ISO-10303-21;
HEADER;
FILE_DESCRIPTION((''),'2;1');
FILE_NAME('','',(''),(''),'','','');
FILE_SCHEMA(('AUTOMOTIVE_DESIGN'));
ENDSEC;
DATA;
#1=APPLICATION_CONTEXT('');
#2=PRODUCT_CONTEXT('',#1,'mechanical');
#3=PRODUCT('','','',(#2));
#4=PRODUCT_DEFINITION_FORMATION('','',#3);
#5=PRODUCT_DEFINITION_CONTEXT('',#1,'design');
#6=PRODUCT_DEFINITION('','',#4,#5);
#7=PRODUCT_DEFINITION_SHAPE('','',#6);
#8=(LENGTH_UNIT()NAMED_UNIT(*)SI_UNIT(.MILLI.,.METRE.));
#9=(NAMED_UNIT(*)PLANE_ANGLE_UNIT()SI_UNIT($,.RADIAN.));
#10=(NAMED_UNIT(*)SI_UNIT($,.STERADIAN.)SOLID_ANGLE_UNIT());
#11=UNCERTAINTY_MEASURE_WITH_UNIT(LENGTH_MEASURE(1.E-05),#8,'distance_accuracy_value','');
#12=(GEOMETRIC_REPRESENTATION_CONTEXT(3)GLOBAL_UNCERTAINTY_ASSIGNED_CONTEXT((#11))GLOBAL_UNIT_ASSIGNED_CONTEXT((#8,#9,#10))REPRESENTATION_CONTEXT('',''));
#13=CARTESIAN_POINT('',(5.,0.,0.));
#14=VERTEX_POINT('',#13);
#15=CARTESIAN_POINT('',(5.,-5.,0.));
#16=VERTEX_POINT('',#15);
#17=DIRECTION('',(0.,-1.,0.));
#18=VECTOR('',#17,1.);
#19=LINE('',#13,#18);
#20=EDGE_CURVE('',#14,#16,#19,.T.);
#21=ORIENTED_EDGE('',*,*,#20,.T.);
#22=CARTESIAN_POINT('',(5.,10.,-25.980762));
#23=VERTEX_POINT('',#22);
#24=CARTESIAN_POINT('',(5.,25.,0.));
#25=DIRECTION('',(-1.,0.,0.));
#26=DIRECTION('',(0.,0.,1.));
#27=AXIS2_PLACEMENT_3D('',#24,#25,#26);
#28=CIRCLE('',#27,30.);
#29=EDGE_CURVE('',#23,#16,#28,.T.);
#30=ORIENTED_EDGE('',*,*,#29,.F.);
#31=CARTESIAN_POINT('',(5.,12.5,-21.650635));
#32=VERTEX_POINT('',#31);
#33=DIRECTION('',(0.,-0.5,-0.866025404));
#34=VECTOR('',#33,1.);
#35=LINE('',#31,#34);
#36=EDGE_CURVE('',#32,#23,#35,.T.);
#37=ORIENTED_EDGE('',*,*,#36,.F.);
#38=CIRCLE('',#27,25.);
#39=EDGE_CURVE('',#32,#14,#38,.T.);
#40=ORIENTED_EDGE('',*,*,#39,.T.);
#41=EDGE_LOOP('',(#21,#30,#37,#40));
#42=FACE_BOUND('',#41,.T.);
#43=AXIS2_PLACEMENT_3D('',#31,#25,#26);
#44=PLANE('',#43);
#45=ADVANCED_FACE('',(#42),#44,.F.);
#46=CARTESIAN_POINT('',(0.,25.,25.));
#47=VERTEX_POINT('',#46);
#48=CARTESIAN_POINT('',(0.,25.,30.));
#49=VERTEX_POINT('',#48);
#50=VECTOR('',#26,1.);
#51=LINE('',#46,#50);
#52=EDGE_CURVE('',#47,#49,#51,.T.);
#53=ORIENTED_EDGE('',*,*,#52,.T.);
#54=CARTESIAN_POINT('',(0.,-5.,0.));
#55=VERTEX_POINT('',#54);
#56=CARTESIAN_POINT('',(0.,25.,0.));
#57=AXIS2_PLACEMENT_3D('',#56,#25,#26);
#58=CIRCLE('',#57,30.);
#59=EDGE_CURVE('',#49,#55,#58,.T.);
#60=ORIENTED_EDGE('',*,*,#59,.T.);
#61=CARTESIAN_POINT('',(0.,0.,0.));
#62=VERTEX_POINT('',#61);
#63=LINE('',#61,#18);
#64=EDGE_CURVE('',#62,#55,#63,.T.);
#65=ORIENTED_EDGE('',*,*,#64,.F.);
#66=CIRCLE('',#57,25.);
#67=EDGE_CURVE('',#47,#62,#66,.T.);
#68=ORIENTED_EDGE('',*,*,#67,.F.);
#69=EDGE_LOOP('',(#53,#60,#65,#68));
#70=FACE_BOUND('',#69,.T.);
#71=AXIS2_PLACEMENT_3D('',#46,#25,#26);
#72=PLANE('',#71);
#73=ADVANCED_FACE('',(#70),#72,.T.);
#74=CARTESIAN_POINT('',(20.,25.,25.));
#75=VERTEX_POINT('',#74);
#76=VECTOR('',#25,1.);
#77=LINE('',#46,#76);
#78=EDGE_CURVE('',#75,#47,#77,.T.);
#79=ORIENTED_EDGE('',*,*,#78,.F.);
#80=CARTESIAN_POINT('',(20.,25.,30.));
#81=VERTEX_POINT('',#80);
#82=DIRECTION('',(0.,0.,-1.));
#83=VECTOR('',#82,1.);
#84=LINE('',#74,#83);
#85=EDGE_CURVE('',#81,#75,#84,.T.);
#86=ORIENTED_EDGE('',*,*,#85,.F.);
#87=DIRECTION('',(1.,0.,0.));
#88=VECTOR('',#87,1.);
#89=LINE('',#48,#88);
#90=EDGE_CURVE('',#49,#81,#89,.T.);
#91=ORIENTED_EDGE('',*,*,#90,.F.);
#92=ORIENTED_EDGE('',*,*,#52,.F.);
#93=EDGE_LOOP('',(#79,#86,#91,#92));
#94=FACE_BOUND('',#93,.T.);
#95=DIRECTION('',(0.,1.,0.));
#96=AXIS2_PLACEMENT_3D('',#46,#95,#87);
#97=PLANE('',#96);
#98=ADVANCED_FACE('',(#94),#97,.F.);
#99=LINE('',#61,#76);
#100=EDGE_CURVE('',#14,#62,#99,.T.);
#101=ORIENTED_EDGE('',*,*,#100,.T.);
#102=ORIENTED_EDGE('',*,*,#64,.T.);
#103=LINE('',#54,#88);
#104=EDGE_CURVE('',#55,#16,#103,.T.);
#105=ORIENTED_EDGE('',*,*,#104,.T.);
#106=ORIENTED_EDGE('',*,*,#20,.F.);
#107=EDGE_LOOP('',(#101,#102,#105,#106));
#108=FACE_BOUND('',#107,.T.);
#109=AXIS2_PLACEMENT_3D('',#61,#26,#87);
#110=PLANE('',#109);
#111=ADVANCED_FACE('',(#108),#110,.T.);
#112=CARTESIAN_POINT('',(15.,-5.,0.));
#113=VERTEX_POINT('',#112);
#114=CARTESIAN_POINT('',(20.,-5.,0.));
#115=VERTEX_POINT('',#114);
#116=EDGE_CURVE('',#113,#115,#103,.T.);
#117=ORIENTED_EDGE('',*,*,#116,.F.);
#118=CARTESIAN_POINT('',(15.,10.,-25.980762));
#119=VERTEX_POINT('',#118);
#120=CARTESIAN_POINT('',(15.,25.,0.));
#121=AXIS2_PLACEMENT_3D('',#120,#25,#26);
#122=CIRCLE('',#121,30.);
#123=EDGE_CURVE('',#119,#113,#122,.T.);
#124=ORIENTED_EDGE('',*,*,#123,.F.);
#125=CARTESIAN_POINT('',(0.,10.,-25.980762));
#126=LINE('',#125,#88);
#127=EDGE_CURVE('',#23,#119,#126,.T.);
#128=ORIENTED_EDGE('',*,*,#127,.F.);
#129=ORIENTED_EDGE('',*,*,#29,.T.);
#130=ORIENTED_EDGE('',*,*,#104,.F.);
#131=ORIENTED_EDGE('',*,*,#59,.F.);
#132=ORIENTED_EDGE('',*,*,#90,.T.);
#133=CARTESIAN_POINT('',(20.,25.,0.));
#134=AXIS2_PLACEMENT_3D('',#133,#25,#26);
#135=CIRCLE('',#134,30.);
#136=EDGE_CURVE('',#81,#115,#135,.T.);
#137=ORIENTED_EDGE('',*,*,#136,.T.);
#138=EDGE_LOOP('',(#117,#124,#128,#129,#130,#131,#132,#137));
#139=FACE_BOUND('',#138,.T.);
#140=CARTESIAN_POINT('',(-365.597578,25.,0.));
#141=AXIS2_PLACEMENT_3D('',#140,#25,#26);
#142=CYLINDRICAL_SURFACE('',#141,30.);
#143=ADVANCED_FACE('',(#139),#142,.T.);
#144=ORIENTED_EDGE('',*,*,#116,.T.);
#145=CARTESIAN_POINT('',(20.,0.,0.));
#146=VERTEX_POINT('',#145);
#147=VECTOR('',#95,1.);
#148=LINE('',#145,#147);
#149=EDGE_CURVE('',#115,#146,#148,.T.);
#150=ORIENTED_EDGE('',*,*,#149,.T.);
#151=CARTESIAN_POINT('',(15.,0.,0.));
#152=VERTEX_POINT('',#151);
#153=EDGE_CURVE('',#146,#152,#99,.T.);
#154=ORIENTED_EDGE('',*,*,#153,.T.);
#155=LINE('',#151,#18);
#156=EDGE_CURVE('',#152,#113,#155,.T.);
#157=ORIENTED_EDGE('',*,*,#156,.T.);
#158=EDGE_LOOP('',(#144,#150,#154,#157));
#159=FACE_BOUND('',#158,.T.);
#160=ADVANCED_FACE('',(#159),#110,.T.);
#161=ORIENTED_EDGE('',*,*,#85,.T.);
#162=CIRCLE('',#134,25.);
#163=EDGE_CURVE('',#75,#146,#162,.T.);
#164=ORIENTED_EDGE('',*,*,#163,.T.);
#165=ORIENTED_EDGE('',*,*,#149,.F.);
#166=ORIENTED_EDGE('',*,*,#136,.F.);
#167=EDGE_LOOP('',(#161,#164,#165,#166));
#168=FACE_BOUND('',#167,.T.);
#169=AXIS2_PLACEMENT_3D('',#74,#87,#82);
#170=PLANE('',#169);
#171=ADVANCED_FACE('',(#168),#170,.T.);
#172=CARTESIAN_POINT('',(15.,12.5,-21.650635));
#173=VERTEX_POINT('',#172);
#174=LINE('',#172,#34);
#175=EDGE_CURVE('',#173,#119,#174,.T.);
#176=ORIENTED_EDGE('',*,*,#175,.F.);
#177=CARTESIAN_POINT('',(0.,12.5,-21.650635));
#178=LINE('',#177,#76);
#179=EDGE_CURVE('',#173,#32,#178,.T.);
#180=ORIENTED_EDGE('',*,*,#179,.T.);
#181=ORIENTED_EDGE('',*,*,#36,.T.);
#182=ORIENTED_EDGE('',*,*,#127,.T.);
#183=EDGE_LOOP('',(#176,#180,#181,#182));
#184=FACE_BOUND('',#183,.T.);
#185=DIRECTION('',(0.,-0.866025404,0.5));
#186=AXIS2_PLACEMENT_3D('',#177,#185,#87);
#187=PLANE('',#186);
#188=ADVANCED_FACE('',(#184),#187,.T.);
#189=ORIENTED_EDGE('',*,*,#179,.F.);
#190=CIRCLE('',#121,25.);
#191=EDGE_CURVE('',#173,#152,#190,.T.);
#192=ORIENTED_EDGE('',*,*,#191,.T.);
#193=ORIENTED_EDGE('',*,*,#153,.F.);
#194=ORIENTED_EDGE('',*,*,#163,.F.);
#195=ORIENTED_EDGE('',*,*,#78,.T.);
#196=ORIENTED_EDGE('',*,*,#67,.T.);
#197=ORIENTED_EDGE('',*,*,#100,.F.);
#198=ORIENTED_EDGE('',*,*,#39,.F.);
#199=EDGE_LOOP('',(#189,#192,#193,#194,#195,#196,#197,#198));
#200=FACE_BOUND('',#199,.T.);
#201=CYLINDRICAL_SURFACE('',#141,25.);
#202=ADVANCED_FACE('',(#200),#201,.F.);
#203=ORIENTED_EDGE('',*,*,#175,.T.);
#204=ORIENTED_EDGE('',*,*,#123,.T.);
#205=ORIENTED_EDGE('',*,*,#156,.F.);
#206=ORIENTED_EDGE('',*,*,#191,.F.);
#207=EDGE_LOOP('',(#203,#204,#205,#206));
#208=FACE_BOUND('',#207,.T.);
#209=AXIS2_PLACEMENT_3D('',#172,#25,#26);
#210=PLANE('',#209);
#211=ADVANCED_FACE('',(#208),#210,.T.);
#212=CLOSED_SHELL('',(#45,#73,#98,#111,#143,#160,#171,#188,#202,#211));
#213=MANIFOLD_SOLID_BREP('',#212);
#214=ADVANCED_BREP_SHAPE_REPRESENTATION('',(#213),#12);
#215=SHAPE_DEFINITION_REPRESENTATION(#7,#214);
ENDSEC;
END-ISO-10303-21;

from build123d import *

# Parameters (mm, degrees)
SKETCH1_W          = 5
SKETCH1_H          = 5
SKETCH1_W_2        = 10
REVOLVE1_ANGLE     = 270
CUT_REVOLVE1_START = 5
CUT_REVOLVE1_DEPTH = 10


# Read off the part's stored shape, not the designer's step: Cut-Revolve1
with BuildPart() as part:
    # Sketch1 → Revolve1 (revolve)
    with BuildSketch(Plane.XY):
        with Locations((2.5, -2.5)):
            Rectangle(SKETCH1_W, SKETCH1_H)
        with Locations((17.5, -2.5)):
            Rectangle(SKETCH1_W, SKETCH1_H)
        with Locations((10, -2.5)):
            Rectangle(SKETCH1_W_2, SKETCH1_H)
    revolve(axis=Axis((-365.597578267, 25, 0), (1, 0, 0)), revolution_arc=REVOLVE1_ANGLE)

    # Cut-Revolve1 outline → Cut-Revolve1 (cut)
    with BuildSketch(Plane.YZ.offset(CUT_REVOLVE1_START)):
        with BuildLine():
            Line((10, -25.980762114), (12.5, -21.650635095))
            ThreePointArc((12.5, -21.650635095), (3.349364905, -12.5), (0, 0))
            Line((0, 0), (-5, 0))
            ThreePointArc((-5, 0), (-0.980762114, -15), (10, -25.980762114))
        make_face()
    extrude(amount=CUT_REVOLVE1_DEPTH, mode=Mode.SUBTRACT)


solid = part.part
